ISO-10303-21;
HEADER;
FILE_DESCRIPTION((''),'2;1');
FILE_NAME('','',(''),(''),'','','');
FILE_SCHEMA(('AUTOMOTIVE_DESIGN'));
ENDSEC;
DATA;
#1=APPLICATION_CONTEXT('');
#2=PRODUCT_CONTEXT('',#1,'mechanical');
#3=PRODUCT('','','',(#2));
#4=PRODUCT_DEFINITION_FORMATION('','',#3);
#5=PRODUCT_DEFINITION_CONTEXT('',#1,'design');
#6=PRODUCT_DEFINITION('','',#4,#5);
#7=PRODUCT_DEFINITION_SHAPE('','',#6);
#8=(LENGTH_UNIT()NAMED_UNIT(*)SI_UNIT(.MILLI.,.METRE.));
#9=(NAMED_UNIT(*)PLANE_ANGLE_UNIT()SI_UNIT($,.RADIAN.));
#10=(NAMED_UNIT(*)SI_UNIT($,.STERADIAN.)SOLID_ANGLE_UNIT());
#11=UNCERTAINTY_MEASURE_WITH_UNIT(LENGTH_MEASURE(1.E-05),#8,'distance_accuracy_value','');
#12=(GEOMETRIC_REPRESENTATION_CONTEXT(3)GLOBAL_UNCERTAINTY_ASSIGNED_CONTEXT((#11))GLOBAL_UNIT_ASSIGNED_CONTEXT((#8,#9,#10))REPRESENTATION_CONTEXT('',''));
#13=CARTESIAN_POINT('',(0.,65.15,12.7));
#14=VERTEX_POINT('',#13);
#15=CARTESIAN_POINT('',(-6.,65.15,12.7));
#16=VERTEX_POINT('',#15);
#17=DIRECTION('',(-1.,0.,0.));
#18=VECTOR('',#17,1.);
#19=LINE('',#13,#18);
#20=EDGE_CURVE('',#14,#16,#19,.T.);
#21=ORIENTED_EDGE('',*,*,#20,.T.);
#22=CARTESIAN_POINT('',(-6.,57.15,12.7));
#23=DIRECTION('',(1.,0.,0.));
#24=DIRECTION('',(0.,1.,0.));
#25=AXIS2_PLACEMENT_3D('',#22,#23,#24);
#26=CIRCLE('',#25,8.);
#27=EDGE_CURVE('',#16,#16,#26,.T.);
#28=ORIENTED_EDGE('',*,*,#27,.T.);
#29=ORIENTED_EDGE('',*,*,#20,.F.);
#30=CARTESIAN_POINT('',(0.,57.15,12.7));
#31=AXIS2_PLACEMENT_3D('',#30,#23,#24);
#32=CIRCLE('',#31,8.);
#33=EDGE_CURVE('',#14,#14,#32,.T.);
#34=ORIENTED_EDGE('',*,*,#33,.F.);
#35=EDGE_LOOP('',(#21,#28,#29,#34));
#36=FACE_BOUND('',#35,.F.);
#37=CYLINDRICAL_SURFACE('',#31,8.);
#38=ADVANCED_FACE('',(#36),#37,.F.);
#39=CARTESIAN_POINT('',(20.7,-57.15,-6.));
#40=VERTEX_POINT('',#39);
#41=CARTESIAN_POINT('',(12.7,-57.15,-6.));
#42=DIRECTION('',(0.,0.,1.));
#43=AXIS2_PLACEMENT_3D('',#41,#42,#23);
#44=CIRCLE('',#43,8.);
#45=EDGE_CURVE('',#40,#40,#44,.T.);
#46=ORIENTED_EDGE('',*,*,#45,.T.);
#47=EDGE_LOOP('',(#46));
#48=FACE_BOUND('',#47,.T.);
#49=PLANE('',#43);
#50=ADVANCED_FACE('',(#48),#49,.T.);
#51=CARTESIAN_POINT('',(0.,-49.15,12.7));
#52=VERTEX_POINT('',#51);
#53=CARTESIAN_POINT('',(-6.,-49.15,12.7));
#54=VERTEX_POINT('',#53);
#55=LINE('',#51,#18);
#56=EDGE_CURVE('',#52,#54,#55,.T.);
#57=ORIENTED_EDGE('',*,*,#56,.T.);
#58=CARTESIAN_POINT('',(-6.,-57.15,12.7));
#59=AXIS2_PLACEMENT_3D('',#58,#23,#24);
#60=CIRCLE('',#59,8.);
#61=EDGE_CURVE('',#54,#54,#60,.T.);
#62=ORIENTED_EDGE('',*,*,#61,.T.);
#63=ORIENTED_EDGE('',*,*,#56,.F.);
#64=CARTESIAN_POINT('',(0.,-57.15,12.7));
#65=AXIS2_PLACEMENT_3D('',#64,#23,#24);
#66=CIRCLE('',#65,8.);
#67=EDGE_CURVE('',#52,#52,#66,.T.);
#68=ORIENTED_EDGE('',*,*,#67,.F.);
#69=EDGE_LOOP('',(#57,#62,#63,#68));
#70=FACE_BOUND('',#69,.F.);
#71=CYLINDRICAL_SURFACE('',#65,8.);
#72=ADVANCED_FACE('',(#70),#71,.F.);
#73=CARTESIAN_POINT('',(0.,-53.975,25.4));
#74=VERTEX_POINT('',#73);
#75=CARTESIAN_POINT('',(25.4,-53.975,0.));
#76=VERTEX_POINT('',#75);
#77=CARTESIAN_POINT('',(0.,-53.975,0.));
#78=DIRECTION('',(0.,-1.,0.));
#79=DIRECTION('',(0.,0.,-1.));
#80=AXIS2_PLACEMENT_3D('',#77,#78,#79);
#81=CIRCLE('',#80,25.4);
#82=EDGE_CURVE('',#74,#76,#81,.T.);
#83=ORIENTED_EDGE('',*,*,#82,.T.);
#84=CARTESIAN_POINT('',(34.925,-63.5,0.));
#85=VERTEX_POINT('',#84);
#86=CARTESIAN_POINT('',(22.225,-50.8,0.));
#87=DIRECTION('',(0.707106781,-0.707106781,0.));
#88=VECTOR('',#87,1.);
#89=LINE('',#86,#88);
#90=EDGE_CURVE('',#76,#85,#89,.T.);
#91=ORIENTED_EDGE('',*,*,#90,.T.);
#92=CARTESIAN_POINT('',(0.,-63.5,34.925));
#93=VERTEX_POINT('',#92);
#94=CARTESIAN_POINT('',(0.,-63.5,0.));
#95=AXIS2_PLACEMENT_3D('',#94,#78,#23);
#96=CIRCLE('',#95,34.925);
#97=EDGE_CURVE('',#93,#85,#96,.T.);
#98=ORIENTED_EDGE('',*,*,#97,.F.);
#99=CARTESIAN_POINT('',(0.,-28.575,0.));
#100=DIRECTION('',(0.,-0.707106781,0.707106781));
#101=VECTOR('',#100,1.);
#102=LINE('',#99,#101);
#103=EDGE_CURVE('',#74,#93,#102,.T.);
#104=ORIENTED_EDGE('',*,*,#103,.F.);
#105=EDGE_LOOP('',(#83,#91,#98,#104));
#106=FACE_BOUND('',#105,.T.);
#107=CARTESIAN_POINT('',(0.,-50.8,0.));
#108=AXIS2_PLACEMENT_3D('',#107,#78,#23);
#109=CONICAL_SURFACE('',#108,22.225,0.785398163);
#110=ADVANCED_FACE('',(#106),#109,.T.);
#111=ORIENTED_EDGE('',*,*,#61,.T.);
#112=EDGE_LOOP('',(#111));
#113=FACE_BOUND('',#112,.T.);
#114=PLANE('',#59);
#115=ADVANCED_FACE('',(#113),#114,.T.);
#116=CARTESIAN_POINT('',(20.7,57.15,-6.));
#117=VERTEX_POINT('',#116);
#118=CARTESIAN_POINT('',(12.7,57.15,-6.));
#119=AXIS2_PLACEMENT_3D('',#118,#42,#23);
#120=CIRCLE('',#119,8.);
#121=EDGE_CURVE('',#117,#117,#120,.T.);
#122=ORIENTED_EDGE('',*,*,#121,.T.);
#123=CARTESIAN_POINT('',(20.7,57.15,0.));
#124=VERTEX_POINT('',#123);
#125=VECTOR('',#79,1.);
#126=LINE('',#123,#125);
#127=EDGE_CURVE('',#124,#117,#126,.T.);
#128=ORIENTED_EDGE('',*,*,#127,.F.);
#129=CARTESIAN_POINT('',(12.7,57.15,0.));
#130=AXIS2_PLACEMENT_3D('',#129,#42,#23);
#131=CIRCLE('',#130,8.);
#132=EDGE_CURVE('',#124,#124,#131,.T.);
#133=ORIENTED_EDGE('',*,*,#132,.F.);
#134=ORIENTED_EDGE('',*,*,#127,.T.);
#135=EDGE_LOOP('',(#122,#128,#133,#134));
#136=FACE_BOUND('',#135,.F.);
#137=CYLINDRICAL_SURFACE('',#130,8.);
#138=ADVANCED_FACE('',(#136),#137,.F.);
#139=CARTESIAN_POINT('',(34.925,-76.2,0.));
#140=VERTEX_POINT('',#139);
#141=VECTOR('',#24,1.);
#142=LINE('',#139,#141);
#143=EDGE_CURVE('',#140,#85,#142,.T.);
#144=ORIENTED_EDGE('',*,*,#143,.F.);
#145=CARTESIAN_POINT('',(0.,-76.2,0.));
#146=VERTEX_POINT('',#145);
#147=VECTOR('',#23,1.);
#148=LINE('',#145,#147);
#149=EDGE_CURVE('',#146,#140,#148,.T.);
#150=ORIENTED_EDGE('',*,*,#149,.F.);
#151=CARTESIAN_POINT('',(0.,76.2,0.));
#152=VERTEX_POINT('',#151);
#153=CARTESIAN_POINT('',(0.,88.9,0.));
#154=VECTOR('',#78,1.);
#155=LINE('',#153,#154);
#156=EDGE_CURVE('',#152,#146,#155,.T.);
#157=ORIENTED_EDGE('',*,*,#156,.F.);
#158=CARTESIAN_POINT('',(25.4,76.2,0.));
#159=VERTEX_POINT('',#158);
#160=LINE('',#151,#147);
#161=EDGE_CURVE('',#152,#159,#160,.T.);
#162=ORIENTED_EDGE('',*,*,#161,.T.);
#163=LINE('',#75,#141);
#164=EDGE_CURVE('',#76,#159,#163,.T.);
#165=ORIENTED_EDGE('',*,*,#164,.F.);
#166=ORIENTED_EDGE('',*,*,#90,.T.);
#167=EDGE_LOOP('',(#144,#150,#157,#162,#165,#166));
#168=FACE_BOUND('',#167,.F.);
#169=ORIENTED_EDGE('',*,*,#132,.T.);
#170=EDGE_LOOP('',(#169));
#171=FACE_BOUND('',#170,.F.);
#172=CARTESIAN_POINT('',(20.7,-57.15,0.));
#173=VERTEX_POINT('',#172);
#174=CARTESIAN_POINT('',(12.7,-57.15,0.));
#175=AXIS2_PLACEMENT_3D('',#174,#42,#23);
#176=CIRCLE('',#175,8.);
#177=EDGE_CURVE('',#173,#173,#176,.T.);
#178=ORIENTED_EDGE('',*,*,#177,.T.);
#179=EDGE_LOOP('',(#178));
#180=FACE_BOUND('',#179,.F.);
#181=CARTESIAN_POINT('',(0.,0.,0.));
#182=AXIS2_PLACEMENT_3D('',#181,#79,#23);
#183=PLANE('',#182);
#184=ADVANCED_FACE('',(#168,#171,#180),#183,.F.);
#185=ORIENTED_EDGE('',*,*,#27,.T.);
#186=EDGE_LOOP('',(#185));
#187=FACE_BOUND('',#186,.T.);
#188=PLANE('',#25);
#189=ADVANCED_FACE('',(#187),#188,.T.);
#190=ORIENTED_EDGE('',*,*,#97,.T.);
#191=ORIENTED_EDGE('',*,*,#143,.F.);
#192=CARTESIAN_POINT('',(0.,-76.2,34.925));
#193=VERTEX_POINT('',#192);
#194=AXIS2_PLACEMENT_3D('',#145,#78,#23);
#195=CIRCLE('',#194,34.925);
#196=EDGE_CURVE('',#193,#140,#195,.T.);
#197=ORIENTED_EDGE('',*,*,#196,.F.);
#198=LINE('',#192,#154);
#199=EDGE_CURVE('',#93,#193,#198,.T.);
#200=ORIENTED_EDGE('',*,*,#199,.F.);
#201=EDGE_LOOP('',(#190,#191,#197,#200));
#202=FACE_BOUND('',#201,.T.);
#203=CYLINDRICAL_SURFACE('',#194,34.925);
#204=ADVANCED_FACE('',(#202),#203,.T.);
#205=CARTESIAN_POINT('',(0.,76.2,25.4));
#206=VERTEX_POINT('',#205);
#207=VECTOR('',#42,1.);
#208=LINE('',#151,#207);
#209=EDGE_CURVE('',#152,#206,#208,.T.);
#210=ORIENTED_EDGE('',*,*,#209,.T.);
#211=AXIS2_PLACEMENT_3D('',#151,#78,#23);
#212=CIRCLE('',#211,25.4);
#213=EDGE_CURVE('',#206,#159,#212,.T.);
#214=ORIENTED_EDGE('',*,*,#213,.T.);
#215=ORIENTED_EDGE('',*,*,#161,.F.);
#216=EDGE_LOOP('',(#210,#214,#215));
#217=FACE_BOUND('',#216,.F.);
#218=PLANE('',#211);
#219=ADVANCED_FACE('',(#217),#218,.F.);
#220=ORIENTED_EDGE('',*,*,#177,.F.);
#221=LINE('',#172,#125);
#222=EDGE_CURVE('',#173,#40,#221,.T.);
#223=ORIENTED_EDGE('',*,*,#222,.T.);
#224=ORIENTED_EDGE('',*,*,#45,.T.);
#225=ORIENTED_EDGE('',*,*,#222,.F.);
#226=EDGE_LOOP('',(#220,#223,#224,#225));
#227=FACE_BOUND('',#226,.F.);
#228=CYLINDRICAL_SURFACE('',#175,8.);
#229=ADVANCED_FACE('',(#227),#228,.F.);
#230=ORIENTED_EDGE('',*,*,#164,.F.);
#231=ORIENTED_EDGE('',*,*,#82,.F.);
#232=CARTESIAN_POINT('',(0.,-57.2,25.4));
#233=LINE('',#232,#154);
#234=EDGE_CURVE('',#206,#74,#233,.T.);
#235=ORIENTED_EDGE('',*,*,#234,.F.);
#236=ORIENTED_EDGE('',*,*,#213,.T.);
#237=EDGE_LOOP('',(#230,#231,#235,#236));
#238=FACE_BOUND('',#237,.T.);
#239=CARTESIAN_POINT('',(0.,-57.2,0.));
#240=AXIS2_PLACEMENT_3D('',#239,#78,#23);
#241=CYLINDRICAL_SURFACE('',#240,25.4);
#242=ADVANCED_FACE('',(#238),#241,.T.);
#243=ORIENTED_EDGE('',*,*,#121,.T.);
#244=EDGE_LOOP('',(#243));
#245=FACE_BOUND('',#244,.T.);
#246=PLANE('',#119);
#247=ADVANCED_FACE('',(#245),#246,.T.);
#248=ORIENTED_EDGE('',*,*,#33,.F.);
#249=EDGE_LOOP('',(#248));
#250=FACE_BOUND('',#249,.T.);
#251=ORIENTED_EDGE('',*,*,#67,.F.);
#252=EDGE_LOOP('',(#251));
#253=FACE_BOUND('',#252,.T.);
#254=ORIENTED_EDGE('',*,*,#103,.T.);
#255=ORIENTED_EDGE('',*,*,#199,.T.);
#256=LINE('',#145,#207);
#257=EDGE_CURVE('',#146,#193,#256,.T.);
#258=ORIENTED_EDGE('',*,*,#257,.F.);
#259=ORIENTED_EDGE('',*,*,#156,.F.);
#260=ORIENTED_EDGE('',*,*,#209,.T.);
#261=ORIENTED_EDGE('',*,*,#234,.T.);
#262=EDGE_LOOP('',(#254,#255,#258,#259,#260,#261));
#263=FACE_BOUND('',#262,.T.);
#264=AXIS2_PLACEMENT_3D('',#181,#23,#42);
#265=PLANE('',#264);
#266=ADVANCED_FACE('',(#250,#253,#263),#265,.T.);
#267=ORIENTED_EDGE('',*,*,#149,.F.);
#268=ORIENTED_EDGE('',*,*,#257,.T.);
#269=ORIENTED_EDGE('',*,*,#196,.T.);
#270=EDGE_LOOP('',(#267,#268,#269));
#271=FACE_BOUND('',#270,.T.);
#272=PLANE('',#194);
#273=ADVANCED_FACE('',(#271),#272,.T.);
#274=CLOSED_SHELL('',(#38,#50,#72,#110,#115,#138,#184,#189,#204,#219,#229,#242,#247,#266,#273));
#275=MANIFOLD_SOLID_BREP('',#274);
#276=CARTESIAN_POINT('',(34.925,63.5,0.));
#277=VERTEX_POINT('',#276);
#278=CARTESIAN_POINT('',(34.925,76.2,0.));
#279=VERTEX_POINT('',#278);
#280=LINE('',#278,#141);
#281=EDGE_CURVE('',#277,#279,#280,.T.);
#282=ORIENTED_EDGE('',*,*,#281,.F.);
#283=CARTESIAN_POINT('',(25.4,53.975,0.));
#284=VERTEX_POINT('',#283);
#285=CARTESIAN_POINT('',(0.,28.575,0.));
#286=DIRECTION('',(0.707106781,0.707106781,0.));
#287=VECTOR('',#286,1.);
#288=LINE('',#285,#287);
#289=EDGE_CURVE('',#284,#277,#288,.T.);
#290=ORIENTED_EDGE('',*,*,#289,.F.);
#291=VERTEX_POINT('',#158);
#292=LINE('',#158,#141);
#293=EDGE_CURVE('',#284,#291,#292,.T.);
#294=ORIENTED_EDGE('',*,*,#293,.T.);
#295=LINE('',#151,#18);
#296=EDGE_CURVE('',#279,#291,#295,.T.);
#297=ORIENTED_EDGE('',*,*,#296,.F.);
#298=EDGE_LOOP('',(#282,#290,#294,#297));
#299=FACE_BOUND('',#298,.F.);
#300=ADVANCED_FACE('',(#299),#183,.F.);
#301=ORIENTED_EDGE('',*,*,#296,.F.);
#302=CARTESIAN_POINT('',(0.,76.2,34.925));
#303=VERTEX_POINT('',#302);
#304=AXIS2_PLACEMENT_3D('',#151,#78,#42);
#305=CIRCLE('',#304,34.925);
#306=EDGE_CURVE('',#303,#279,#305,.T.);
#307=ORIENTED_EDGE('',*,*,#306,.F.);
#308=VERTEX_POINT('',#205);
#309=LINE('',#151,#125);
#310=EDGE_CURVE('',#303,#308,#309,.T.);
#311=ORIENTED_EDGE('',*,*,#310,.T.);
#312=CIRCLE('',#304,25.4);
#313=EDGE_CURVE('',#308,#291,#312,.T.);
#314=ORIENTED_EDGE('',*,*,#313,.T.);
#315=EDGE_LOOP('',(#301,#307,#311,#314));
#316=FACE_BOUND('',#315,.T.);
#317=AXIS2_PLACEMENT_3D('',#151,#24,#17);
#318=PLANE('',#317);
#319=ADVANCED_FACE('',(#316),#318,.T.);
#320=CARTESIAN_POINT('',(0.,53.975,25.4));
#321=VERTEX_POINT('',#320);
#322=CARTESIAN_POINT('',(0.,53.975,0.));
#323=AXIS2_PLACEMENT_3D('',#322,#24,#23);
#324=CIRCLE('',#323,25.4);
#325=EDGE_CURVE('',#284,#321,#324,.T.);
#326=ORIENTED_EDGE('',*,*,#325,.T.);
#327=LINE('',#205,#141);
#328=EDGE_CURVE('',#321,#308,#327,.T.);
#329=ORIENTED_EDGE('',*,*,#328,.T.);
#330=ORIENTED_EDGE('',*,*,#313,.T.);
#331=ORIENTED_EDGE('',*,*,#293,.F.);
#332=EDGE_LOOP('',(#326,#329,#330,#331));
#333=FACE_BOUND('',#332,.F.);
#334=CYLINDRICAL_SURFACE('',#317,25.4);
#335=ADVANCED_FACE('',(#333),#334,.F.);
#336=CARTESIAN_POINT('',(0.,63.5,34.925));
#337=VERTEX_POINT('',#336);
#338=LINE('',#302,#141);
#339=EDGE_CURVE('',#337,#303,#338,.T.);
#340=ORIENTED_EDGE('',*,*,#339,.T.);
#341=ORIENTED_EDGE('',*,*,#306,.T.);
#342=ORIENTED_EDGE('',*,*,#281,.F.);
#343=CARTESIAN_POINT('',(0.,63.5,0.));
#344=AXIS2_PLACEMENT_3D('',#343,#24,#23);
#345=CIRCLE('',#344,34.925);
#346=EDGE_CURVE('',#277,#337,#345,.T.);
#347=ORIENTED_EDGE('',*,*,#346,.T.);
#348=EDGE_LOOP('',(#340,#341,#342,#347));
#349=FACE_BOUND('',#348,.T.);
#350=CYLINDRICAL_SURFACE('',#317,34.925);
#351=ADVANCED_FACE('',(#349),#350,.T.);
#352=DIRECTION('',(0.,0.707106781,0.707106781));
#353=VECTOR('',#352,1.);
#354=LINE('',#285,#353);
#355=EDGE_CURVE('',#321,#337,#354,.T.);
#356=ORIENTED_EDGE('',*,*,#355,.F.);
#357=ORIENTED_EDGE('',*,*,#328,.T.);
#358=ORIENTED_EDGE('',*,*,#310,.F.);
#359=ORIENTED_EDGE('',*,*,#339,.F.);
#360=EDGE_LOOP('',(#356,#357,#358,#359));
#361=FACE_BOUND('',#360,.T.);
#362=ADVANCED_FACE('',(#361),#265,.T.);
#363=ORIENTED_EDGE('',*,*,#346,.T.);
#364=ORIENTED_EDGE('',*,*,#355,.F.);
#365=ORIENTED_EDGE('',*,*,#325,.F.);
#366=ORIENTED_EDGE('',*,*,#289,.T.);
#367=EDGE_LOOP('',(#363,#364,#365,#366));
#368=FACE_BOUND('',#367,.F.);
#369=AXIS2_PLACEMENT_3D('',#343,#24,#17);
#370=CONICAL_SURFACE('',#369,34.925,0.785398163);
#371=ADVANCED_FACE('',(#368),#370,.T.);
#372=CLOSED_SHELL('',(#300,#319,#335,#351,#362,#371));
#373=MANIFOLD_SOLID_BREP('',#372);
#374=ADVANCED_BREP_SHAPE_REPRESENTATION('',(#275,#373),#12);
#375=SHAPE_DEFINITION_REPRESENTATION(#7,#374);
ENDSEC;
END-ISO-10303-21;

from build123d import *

# Parameters (mm, degrees)
F0_R          = 25.4
F1_DEPTH      = 76.2
F2_R          = 34.925
F2_R_2        = 25.4
F4_DEPTH      = 25.4
F3_R          = 34.925
F3_R_2        = 25.4
F5_DEPTH      = 25.4
F6_2_S5_R     = 25.4
F6_2_T6_DEPTH = 51
F7_W          = 48.0628833175
F7_H          = 48.6316718161
F8_DEPTH      = 88.9
F9_R          = 8
F10_DEPTH     = 6
F11_R         = 8
F12_DEPTH     = 6


# Not quite as in the source:
# - a fillet or chamfer that OpenCascade refuses, or shapes differently, is made with other operations: its cross-section is extruded or revolved along the edge and cut away or added


with BuildPart() as f1:
    # F0 (on Front) → F1 (new body, symmetric)
    with BuildSketch(Plane.XZ):
        Circle(F0_R)
    extrude(amount=F1_DEPTH, both=True)

    # F2 (on face) → F4 (join)
    with BuildSketch(Plane.XZ.offset(76.2)):
        Circle(F2_R)
        Circle(F2_R_2, mode=Mode.SUBTRACT)
    extrude(amount=-F4_DEPTH)

    # F6#2: chamfer of 12.7 on 1 edges, made by hand


with BuildPart() as f5:
    # F3 (on face) → F5 (new body)
    with BuildSketch(Plane(origin=(0, 76.2, 0), x_dir=(-1, 0, 0), z_dir=(0, 1, 0))):
        Circle(F3_R)
        Circle(F3_R_2, mode=Mode.SUBTRACT)
    extrude(amount=-F5_DEPTH)

    # F6: chamfer of 12.7 on 1 edges, made by hand

    # F6_s1 → F6_t2 (revolve, cut)
    with BuildSketch(Plane.XY):
        Polygon((-34.925, 63.5), (-22.225, 50.8), (-34.925, 50.8), align=None)
    revolve(axis=Axis((0, 50.8, 0), (0, 1, 0)), mode=Mode.SUBTRACT)


with BuildPart() as f6_2_tool2:
    # F6_2_s3 → F6_2_t4 (revolve)
    with BuildSketch(Plane.XY):
        Polygon((22.225, -50.8), (34.925, -63.5), (34.925, -50.8), align=None)
    revolve(axis=Axis((0, -50.8, 0), (0, -1, 0)))

    # F6_2_s5 → F6_2_t6 (cut, symmetric)
    with BuildSketch(Plane.XZ.offset(57.2)):
        Circle(F6_2_S5_R)
    extrude(amount=F6_2_T6_DEPTH, both=True, mode=Mode.SUBTRACT)


with BuildPart() as f1_1:
    add(f1.part)

    # F6_2_t1: cut F6_2_tool2
    add(f6_2_tool2.part, mode=Mode.SUBTRACT)


with BuildPart() as f8_tool:
    # F7 (on Front) → F8 (new body, symmetric)
    with BuildSketch(Plane.XZ):
        with Locations((24.0314416587, 24.3158359081)):
            Rectangle(F7_W, F7_H)
    extrude(amount=F8_DEPTH, both=True)


with BuildPart() as f1_2:
    add(f1_1.part)

    # F8: cut by f8_tool
    add(f8_tool.part, mode=Mode.SUBTRACT)

    # F9 (on face) → F10 (cut)
    with BuildSketch(Plane.YZ):
        with Locations((-57.15, 12.7)):
            Circle(F9_R)
        with Locations((57.15, 12.7)):
            Circle(F9_R)
    extrude(amount=-F10_DEPTH, mode=Mode.SUBTRACT)

    # F11 (on face) → F12 (cut)
    with BuildSketch(Plane.XY):
        with Locations((12.7, -57.15)):
            Circle(F11_R)
        with Locations((12.7, 57.15)):
            Circle(F11_R)
    extrude(amount=-F12_DEPTH, mode=Mode.SUBTRACT)


with BuildPart() as f5_1:
    add(f5.part)

    # F8: cut by f8_tool
    add(f8_tool.part, mode=Mode.SUBTRACT)


solid = Compound([f1_2.part, f5_1.part])
